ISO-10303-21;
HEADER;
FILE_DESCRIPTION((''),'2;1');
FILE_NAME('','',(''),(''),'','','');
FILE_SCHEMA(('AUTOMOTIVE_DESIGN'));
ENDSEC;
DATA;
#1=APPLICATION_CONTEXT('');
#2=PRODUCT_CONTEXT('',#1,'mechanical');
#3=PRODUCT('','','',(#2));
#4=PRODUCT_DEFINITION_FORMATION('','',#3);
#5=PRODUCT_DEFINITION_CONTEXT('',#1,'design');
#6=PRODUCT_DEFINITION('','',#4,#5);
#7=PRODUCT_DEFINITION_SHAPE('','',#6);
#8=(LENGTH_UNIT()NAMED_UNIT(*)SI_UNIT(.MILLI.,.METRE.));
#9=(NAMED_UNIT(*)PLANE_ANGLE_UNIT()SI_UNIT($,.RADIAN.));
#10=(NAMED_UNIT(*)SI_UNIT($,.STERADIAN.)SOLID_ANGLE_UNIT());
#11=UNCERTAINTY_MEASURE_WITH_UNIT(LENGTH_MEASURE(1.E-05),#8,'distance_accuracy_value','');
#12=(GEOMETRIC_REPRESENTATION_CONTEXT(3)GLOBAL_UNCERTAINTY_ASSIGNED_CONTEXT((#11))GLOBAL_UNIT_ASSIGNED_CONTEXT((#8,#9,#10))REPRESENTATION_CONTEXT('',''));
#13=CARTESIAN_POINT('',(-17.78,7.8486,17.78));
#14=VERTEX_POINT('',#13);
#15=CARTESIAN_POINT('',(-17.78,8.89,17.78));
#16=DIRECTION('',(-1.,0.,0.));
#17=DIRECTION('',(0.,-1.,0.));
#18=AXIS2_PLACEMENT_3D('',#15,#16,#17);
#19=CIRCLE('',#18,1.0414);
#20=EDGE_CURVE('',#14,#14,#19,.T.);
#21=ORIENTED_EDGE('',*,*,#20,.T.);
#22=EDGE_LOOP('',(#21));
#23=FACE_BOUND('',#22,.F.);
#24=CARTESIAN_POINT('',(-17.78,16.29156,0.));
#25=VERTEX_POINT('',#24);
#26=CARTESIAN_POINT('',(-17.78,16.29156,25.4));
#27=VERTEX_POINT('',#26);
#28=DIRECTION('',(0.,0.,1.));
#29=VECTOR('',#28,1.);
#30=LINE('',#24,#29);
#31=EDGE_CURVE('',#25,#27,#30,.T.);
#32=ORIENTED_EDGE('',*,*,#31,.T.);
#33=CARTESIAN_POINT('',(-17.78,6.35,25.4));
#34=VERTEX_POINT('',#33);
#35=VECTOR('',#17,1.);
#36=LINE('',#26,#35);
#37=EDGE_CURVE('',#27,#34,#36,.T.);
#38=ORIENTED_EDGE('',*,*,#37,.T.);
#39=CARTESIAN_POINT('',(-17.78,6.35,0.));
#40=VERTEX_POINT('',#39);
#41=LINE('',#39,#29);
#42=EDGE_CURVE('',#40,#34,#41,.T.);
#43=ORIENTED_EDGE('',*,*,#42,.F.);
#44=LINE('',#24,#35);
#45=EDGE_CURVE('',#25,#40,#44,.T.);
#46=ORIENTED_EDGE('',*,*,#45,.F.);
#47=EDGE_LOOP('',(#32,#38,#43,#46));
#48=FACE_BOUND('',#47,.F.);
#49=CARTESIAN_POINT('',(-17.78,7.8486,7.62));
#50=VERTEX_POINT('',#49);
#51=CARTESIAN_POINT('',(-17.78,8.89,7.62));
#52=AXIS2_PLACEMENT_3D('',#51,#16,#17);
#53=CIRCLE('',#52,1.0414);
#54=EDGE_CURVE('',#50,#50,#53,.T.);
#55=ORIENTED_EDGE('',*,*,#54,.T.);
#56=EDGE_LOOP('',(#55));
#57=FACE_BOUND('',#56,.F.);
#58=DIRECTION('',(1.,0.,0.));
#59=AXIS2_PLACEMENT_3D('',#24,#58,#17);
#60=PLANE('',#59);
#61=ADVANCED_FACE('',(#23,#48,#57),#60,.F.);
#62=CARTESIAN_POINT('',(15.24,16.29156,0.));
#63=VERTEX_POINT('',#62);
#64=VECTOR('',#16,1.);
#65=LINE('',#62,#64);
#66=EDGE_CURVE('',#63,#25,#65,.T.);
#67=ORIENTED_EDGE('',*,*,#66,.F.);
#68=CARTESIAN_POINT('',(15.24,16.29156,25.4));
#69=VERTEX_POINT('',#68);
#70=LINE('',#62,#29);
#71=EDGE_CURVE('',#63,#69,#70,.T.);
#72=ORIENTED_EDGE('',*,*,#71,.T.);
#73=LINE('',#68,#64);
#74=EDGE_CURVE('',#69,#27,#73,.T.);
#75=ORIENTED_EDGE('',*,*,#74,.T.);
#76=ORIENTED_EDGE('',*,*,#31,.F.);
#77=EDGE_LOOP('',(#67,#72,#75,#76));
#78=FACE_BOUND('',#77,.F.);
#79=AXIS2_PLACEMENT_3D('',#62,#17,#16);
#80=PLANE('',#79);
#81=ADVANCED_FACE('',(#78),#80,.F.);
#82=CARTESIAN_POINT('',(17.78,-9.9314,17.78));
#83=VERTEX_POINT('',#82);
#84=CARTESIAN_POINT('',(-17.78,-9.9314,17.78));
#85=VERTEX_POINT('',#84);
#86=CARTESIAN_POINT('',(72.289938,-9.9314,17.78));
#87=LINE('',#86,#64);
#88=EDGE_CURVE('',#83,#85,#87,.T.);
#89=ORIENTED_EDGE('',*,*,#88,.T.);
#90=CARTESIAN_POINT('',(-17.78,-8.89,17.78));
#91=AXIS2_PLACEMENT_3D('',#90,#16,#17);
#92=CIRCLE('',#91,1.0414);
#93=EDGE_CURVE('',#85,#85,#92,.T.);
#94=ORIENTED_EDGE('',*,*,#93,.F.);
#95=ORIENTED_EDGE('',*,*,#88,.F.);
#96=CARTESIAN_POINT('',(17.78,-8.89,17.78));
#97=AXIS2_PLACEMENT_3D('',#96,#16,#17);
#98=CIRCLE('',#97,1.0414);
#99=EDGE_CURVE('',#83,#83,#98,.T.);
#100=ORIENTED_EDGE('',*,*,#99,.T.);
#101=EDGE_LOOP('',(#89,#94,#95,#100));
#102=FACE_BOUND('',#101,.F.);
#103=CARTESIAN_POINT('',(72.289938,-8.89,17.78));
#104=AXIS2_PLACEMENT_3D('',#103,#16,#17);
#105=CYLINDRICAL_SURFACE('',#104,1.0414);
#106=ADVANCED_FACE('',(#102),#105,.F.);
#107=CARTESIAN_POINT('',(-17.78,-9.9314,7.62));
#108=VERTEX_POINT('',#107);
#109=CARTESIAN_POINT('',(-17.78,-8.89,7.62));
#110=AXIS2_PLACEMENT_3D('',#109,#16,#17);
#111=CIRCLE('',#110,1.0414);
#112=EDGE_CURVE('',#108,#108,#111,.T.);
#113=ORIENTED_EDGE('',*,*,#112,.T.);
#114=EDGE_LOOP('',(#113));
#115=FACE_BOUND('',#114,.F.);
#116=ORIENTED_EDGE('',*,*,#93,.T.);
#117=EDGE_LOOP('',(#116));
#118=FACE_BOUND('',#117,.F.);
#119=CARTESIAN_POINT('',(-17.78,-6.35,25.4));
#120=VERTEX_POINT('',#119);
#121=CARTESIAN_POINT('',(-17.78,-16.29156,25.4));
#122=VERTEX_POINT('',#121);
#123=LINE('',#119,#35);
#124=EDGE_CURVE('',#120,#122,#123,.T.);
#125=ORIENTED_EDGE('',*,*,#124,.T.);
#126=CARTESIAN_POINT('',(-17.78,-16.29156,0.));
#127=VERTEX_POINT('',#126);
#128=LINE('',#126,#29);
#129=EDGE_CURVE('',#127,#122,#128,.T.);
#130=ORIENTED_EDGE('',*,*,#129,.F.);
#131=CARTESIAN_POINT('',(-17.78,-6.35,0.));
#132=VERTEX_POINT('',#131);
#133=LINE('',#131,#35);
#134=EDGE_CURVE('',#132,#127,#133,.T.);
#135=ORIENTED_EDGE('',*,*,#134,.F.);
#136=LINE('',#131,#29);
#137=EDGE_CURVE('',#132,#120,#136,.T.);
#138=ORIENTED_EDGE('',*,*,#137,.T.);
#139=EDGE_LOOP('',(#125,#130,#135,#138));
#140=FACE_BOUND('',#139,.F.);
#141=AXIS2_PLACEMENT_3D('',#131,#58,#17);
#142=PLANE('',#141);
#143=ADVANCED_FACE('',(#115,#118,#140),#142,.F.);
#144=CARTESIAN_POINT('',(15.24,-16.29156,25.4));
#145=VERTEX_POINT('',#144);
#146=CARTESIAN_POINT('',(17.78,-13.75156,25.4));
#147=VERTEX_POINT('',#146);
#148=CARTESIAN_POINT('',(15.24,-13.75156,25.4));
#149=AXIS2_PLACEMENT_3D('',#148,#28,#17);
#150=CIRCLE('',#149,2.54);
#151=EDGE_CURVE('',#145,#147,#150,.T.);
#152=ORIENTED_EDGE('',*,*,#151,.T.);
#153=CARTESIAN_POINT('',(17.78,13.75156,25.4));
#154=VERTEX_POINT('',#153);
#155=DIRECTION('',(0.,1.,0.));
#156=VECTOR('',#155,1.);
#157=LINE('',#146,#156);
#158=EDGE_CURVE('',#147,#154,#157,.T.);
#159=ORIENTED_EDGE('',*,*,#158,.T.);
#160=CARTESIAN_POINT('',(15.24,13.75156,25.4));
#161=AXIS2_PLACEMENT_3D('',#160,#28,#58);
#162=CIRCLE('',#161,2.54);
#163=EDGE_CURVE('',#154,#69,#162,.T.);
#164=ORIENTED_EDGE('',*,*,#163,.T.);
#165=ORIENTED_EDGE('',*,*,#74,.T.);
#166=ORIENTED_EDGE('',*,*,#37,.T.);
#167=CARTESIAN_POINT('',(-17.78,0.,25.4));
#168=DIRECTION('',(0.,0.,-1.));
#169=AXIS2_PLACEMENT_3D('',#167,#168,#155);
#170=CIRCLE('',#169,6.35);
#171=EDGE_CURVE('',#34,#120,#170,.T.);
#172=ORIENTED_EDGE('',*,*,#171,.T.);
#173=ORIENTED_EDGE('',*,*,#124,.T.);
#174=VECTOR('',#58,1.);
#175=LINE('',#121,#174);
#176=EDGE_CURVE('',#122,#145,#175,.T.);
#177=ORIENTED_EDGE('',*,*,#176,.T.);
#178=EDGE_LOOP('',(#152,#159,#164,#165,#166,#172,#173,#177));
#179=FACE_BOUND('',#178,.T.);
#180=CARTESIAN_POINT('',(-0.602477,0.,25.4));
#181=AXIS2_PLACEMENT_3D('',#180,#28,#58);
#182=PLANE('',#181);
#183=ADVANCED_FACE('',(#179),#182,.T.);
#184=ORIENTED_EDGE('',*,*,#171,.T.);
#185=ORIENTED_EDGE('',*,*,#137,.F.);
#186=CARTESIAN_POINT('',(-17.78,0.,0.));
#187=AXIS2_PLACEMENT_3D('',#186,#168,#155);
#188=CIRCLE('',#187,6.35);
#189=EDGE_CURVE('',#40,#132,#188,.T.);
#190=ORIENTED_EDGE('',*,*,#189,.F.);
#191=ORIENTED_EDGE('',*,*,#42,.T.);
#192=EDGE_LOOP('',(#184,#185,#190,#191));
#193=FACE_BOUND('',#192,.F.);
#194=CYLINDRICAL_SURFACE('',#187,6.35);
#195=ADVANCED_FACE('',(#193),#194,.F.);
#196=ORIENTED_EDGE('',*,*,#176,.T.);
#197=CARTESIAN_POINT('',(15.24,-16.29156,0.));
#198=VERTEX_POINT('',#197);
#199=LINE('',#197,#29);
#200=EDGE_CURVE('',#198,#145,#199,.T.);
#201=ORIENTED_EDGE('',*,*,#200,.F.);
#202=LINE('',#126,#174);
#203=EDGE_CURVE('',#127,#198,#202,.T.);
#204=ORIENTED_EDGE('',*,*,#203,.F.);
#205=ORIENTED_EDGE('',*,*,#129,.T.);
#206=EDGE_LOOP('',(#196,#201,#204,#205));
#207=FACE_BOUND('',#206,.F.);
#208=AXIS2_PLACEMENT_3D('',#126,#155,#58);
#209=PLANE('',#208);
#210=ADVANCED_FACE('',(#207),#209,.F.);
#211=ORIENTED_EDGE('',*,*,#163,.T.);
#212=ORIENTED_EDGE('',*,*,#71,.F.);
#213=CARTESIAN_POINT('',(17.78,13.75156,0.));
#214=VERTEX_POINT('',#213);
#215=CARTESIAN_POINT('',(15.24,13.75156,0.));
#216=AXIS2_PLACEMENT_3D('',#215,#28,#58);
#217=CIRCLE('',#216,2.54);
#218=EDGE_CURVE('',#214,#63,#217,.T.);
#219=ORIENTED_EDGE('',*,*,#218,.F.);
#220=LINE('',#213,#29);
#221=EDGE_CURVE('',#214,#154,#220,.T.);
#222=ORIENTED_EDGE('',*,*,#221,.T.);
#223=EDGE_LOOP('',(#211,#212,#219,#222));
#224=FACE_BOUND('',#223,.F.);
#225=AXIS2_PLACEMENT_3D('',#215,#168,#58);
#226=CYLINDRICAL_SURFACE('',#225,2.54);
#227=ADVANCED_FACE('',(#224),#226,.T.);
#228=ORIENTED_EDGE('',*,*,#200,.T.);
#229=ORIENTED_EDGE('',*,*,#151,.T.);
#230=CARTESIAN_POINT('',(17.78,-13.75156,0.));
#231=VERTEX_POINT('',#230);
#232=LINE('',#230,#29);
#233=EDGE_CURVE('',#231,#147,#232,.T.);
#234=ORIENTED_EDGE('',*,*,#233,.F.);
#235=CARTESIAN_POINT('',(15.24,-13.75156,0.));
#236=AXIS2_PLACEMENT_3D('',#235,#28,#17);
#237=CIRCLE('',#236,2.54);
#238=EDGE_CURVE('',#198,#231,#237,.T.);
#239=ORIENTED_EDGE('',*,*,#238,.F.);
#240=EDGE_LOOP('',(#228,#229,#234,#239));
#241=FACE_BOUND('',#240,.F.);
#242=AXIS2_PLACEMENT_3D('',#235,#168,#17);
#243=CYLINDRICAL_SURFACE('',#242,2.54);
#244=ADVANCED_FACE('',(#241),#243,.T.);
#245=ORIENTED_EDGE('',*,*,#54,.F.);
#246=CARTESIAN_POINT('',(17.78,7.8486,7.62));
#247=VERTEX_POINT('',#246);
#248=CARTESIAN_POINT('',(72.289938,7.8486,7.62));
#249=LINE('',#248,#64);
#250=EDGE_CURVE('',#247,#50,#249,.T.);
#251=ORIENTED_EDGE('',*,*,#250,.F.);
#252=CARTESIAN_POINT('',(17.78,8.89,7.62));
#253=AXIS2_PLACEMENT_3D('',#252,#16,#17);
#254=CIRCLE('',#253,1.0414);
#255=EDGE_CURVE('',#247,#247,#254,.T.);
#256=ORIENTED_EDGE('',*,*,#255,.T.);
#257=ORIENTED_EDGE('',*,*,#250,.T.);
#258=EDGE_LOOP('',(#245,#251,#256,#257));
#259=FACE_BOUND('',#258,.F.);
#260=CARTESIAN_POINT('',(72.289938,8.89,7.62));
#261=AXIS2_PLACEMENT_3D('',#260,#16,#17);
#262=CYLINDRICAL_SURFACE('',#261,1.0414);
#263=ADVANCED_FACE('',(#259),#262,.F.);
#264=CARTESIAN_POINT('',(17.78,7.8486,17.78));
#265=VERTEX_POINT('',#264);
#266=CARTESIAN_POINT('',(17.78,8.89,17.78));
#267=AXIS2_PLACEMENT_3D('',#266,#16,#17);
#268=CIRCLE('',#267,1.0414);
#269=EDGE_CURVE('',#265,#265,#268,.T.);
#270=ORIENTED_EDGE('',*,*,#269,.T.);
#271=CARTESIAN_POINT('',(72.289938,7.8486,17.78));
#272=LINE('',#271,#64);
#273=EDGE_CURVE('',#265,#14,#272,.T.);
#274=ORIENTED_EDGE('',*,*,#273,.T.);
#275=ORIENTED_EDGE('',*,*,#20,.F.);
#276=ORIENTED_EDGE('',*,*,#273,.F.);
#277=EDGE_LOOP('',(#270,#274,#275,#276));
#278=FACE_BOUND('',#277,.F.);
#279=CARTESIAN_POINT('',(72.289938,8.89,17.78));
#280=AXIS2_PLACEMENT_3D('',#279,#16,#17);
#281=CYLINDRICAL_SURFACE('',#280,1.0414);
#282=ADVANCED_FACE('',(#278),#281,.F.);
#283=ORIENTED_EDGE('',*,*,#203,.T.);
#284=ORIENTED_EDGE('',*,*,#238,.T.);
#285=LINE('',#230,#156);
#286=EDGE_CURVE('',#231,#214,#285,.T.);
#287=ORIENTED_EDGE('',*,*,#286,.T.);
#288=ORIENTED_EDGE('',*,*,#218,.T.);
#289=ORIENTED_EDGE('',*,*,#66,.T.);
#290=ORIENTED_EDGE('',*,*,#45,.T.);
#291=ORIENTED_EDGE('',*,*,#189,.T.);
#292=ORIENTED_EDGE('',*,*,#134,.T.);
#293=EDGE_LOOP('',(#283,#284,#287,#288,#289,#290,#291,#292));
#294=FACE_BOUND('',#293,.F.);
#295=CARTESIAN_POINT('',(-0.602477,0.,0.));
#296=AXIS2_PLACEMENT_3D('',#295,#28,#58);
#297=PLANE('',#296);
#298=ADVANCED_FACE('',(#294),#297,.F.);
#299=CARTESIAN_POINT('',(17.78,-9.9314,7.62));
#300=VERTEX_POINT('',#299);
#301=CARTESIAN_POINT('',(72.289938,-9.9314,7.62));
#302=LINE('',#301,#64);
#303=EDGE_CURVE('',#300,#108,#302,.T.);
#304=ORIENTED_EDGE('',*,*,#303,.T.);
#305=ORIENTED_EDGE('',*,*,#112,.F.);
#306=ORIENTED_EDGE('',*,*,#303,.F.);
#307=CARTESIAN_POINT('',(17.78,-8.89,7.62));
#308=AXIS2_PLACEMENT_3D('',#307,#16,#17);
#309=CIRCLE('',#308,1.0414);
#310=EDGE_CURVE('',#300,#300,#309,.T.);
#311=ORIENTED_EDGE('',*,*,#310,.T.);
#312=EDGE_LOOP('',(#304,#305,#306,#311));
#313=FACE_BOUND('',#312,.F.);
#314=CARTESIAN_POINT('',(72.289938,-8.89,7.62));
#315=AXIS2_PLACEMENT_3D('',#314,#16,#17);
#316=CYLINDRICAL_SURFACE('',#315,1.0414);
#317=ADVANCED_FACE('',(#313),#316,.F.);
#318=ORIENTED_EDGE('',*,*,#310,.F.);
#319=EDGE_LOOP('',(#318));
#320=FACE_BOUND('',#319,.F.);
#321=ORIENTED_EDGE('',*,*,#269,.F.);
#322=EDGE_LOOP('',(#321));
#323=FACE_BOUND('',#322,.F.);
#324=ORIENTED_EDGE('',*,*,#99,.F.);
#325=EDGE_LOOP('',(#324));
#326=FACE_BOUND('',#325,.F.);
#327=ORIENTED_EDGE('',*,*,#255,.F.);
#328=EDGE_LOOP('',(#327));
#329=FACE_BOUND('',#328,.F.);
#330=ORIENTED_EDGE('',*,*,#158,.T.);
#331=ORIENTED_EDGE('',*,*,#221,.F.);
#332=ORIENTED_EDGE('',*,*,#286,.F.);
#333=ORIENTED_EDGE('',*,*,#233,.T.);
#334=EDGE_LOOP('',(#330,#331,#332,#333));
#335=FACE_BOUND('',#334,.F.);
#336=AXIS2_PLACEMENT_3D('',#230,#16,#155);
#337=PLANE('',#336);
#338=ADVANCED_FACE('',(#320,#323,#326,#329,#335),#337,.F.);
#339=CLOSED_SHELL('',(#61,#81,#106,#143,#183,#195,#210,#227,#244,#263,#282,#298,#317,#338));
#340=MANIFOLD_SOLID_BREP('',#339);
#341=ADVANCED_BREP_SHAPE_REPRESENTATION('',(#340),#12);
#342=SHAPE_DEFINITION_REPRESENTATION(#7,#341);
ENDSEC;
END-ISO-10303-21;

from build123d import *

# Parameters (mm, degrees)
F1_DEPTH = 25.4
F3_D     = 2.0828


# Not quite as in the source:
# - a feature names something its author has since deleted; it is built from what else it names


with BuildPart() as f1:
    # F0 (on Top) → F1 (new body)
    with BuildSketch(Plane.XY):
        with BuildLine():
            Line((-17.78, -6.35), (-17.78, -16.29156))
            Line((-17.78, -16.29156), (15.24, -16.29156))
            ThreePointArc((15.24, -16.29156), (17.0360512242, -15.5476112242), (17.78, -13.75156))
            Line((17.78, -13.75156), (17.78, 13.75156))
            ThreePointArc((17.78, 13.75156), (17.0360512242, 15.5476112242), (15.24, 16.29156))
            Line((15.24, 16.29156), (-17.78, 16.29156))
            Line((-17.78, 16.29156), (-17.78, 6.35))
            ThreePointArc((-17.78, 6.35), (-11.43, 0), (-17.78, -6.35))
        make_face()
    extrude(amount=F1_DEPTH)

    # F3 (through all)
    with Locations(Plane.YZ.offset(17.78)):
        with Locations((-8.89, 17.78), (-8.89, 7.62), (8.89, 17.78), (8.89, 7.62)):
            Hole(F3_D / 2)


solid = f1.part
